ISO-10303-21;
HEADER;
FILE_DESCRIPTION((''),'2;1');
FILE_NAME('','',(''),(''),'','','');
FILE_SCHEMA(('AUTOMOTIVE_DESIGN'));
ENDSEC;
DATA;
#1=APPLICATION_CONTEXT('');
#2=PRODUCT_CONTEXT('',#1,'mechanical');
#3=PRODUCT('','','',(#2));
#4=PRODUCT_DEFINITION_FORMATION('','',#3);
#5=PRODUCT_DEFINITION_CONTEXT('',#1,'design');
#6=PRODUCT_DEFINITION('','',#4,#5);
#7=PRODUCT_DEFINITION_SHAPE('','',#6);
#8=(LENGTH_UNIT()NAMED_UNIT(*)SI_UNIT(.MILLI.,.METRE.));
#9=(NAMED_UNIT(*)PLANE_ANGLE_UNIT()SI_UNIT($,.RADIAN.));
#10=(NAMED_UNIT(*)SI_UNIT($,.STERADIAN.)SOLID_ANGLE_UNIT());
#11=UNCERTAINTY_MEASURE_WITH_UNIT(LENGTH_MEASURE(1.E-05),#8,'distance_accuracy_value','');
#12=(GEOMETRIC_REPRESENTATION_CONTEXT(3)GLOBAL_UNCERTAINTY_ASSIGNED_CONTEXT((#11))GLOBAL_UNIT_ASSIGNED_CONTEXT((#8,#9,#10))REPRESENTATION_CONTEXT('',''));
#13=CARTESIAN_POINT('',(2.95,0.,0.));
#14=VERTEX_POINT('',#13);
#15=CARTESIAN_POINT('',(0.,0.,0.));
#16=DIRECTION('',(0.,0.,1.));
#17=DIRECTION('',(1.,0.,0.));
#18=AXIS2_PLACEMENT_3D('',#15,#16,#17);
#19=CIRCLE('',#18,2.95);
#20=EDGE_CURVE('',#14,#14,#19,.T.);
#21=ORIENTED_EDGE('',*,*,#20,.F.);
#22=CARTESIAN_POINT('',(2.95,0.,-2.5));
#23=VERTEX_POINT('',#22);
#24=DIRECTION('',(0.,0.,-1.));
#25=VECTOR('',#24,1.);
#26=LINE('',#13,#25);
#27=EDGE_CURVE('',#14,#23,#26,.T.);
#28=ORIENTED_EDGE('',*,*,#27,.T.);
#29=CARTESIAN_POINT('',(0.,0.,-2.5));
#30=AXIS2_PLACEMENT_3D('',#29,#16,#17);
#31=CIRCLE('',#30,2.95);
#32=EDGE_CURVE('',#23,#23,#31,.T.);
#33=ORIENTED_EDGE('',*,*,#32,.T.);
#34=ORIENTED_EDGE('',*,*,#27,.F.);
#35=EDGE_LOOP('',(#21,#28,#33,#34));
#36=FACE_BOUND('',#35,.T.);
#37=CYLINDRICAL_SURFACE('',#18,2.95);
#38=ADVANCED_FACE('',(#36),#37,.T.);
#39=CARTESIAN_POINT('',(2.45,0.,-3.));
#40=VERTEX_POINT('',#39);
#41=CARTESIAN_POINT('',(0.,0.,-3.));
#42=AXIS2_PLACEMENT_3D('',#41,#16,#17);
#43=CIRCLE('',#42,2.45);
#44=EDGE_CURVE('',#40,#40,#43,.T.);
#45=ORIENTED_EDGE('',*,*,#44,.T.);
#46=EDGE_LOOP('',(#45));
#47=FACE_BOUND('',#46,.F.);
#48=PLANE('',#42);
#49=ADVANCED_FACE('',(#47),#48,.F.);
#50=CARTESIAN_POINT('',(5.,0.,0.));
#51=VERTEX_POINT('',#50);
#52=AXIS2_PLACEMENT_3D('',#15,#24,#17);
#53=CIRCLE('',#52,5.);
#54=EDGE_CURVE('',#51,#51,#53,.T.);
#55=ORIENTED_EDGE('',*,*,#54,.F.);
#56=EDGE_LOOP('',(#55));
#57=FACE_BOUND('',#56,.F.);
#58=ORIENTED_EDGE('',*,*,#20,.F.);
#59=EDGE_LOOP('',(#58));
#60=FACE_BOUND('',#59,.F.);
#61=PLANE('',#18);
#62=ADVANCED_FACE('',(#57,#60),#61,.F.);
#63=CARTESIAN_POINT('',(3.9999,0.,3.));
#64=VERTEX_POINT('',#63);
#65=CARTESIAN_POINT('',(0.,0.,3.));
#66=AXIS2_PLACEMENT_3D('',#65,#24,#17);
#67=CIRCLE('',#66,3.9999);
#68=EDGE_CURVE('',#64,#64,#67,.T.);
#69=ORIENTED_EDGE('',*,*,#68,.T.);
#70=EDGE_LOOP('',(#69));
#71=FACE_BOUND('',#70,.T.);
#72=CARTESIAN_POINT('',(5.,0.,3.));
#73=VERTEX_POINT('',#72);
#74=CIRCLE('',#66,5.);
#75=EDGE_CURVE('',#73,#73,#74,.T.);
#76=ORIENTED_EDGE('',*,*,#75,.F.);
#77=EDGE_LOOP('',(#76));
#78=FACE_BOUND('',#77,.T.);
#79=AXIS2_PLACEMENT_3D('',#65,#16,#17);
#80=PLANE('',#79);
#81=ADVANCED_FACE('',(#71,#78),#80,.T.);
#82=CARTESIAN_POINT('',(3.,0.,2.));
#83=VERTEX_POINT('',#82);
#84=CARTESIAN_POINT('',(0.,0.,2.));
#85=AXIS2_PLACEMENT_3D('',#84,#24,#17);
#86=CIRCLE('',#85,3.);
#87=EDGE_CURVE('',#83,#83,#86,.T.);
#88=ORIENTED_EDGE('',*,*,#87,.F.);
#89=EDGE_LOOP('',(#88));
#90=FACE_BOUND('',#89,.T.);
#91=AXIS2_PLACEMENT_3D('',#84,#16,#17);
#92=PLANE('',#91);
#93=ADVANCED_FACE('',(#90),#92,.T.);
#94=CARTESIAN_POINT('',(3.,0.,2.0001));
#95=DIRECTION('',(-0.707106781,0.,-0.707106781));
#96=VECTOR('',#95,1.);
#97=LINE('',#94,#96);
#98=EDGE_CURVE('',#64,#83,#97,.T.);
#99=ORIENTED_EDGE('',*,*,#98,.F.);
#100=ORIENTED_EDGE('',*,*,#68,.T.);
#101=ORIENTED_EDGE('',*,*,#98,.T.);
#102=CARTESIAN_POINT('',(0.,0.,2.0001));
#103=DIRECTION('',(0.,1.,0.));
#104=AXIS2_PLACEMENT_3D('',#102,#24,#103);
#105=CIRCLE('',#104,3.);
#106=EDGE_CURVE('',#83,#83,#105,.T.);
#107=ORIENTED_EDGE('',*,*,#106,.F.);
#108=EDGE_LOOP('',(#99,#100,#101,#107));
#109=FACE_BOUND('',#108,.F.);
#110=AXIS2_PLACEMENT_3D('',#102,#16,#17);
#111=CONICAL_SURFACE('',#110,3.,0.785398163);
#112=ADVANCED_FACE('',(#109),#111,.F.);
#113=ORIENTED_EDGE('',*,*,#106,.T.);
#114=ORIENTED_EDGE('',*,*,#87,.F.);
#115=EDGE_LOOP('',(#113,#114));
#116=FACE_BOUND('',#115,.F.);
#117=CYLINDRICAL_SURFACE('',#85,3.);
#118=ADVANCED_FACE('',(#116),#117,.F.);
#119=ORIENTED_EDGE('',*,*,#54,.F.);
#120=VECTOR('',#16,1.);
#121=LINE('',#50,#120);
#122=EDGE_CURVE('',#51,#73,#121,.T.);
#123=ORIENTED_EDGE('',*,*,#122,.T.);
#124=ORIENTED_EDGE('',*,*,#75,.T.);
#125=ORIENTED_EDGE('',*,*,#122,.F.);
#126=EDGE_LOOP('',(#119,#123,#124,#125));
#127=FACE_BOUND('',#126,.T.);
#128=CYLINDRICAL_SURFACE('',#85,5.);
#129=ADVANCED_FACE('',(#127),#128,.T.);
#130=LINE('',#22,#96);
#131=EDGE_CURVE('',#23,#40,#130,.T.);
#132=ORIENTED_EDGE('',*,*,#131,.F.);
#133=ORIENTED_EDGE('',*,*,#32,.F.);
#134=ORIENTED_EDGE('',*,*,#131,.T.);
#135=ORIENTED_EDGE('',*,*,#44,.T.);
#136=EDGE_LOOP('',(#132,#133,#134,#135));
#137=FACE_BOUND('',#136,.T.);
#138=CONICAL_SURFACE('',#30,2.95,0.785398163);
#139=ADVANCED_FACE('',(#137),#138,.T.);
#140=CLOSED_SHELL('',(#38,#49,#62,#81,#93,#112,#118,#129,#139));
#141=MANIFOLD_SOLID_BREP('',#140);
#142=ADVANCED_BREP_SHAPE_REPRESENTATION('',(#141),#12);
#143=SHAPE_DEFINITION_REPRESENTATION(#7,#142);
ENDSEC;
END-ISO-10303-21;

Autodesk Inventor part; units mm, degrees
ref_plane "YZ Plane" through (0, 0, 0) normal (1, 0, 0) x (0, 1, 0)
ref_plane "XZ Plane" through (0, 0, 0) normal (0, 1, 0) x (-1, 0, 0)
ref_plane "XY Plane" through (0, 0, 0) normal (0, 0, 1) x (1, 0, 0)
sketch "Sketch1" plane through (0, 0, 0) normal (0, 0, 1) x (1, 0, 0)
  circle A0 centre (0, 0) radius 3 projected
  circle A1 centre (0, 0) radius 3
  point P0 (0, 0)
  dimension "d0" = 6
extrude "Extrusion1" add sketch "Sketch1" against normal blind 3
sketch "Sketch2" plane through (0, 0, 0) normal (0, 0, 1) x (1, 0, 0)
  circle A0 centre (0, 0) radius 3 projected
  circle A1 centre (0, 0) radius 11 projected
  circle A2 centre (0, 0) radius 3 projected
  circle A3 centre (8, 0) radius 1.5 projected
  circle A4 centre (0, 8) radius 1.5 projected
  circle A5 centre (-8, 0) radius 1.5 projected
  circle A6 centre (0, -8) radius 1.5 projected
  circle A7 centre (0, 0) radius 5
  point P0 (0, 0)
  dimension "d3" = 10
extrude "Extrusion2" add sketch "Sketch2" along normal blind 2 contours A0 | A7
sketch "Sketch3" plane through (0, 0, 2) normal (0, 0, 1) x (1, 0, 0)
  circle A0 centre (0, 0) radius 5 projected
  circle A1 centre (0, 0) radius 3 projected
  circle A2 centre (0, 0) radius 3
  point P0 (0, 0)
  dimension "d6" = 6
extrude "Extrusion3" add sketch "Sketch3" along normal blind 1
chamfer "Chamfer1" distance 1 angle 45 1 edges at (-3, 0, 3)
thicken "Thicken1" operation add thickness 0.05 both sides no extend neighbours yes toward (-0.9967573, 0.0804666, 0) faces at (2.9903, -0.2414, -2)
chamfer "Chamfer2" distance 0.5 angle 45 1 edges at (-2.95, 0, -3)
properties part number "encoder_ma_holder"
